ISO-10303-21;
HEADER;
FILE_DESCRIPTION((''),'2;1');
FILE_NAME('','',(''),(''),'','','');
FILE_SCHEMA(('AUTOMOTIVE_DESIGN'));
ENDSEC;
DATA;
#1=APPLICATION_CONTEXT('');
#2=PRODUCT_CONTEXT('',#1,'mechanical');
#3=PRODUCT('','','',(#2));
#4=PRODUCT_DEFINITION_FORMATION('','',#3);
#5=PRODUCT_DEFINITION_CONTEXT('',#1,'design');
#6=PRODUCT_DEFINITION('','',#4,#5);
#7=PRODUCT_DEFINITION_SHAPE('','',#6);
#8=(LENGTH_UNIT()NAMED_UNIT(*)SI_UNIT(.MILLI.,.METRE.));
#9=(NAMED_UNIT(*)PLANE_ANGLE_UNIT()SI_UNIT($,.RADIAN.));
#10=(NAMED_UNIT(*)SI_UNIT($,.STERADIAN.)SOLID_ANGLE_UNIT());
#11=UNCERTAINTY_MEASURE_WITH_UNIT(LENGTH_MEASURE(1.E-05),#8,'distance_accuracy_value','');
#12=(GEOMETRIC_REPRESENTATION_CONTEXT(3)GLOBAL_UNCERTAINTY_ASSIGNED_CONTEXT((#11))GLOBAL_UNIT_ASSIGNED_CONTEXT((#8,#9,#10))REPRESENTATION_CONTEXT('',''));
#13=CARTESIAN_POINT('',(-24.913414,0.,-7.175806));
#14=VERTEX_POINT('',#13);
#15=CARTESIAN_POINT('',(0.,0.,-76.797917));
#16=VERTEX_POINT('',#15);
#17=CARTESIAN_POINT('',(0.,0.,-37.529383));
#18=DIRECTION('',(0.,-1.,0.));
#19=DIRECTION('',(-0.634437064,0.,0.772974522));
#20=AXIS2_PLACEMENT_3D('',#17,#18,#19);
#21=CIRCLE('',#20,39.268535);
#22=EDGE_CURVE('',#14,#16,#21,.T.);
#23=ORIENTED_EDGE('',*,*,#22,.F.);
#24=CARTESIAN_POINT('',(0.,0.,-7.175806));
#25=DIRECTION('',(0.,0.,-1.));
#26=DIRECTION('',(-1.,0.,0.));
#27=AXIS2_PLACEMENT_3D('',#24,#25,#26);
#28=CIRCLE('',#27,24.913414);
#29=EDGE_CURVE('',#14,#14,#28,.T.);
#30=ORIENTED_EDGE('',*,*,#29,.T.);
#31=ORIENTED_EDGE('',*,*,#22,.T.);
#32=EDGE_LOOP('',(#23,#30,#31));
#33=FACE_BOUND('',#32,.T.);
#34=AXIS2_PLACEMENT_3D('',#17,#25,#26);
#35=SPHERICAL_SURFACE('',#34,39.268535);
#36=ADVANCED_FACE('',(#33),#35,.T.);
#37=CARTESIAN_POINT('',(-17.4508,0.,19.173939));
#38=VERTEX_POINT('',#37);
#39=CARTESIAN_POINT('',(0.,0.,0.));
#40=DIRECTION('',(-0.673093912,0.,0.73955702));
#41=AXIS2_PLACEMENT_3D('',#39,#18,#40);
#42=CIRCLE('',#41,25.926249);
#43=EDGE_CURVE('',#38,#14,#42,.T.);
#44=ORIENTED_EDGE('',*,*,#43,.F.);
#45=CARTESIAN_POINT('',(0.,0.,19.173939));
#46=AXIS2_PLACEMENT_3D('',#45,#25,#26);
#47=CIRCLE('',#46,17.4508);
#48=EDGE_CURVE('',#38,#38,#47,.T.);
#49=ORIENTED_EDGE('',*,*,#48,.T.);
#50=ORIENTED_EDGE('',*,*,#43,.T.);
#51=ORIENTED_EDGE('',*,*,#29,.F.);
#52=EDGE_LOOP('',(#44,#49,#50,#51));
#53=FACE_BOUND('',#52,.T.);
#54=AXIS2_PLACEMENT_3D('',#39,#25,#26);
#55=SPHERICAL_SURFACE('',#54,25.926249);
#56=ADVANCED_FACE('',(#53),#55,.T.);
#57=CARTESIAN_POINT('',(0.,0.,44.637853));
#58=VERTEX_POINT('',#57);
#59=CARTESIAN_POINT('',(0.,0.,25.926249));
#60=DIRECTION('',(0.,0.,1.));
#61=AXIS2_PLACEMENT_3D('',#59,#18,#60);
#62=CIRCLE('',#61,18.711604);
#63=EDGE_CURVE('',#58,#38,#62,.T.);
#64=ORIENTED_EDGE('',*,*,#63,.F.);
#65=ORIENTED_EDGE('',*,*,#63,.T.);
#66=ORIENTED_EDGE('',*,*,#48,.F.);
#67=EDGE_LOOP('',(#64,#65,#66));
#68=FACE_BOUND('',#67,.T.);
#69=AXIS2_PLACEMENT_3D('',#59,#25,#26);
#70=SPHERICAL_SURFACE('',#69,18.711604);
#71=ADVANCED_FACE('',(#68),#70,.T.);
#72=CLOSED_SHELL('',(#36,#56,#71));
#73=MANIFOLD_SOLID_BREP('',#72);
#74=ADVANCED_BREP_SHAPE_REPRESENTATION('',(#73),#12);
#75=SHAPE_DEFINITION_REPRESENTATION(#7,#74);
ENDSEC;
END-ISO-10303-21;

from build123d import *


with BuildPart() as f1:
    # F0 (on Front) → F1 (revolve)
    with BuildSketch(Plane.XZ):
        with BuildLine():
            Line((0, 25.9262488724), (0, 44.637852612))
            ThreePointArc((0, 44.637852612), (-15.4348737394, 36.5039984988), (-17.4508002843, 19.1739393457))
            ThreePointArc((-17.4508002843, 19.1739393457), (-9.3558018698, 24.179316615), (0, 25.9262488724))
        make_face()
        with BuildLine():
            ThreePointArc((0, 7.2146451328), (-10.5777496264, 10.491375133), (-17.4508002843, 19.1739393457))
            ThreePointArc((-17.4508002843, 19.1739393457), (-24.945118357, 7.0648036597), (-24.9134138156, -7.1758060625))
            ThreePointArc((-24.9134138156, -7.1758060625), (-13.2302178856, -0.5567017681), (0, 1.7391517758))
            Line((0, 1.7391517758), (0, 7.2146451328))
        make_face()
        with BuildLine():
            ThreePointArc((0, -25.9262488724), (-15.590520305, -20.7148752643), (-24.9134138156, -7.1758060625))
            ThreePointArc((-24.9134138156, -7.1758060625), (-36.9726810866, -50.7596007403), (0, -76.7979174852))
            Line((0, -76.7979174852), (0, -25.9262488724))
        make_face()
        with BuildLine():
            ThreePointArc((0, 1.7391517758), (-13.2302178856, -0.5567017681), (-24.9134138156, -7.1758060625))
            ThreePointArc((-24.9134138156, -7.1758060625), (-15.590520305, -20.7148752643), (0, -25.9262488724))
            Line((0, -25.9262488724), (0, 1.7391517758))
        make_face()
        with BuildLine():
            Line((0, 7.2146451328), (0, 25.9262488724))
            ThreePointArc((0, 25.9262488724), (-9.3558018698, 24.179316615), (-17.4508002843, 19.1739393457))
            ThreePointArc((-17.4508002843, 19.1739393457), (-10.5777496264, 10.491375133), (0, 7.2146451328))
        make_face()
    revolve(axis=Axis((0, 0, -5.5481381714), (0, 0, -1)))


solid = f1.part
